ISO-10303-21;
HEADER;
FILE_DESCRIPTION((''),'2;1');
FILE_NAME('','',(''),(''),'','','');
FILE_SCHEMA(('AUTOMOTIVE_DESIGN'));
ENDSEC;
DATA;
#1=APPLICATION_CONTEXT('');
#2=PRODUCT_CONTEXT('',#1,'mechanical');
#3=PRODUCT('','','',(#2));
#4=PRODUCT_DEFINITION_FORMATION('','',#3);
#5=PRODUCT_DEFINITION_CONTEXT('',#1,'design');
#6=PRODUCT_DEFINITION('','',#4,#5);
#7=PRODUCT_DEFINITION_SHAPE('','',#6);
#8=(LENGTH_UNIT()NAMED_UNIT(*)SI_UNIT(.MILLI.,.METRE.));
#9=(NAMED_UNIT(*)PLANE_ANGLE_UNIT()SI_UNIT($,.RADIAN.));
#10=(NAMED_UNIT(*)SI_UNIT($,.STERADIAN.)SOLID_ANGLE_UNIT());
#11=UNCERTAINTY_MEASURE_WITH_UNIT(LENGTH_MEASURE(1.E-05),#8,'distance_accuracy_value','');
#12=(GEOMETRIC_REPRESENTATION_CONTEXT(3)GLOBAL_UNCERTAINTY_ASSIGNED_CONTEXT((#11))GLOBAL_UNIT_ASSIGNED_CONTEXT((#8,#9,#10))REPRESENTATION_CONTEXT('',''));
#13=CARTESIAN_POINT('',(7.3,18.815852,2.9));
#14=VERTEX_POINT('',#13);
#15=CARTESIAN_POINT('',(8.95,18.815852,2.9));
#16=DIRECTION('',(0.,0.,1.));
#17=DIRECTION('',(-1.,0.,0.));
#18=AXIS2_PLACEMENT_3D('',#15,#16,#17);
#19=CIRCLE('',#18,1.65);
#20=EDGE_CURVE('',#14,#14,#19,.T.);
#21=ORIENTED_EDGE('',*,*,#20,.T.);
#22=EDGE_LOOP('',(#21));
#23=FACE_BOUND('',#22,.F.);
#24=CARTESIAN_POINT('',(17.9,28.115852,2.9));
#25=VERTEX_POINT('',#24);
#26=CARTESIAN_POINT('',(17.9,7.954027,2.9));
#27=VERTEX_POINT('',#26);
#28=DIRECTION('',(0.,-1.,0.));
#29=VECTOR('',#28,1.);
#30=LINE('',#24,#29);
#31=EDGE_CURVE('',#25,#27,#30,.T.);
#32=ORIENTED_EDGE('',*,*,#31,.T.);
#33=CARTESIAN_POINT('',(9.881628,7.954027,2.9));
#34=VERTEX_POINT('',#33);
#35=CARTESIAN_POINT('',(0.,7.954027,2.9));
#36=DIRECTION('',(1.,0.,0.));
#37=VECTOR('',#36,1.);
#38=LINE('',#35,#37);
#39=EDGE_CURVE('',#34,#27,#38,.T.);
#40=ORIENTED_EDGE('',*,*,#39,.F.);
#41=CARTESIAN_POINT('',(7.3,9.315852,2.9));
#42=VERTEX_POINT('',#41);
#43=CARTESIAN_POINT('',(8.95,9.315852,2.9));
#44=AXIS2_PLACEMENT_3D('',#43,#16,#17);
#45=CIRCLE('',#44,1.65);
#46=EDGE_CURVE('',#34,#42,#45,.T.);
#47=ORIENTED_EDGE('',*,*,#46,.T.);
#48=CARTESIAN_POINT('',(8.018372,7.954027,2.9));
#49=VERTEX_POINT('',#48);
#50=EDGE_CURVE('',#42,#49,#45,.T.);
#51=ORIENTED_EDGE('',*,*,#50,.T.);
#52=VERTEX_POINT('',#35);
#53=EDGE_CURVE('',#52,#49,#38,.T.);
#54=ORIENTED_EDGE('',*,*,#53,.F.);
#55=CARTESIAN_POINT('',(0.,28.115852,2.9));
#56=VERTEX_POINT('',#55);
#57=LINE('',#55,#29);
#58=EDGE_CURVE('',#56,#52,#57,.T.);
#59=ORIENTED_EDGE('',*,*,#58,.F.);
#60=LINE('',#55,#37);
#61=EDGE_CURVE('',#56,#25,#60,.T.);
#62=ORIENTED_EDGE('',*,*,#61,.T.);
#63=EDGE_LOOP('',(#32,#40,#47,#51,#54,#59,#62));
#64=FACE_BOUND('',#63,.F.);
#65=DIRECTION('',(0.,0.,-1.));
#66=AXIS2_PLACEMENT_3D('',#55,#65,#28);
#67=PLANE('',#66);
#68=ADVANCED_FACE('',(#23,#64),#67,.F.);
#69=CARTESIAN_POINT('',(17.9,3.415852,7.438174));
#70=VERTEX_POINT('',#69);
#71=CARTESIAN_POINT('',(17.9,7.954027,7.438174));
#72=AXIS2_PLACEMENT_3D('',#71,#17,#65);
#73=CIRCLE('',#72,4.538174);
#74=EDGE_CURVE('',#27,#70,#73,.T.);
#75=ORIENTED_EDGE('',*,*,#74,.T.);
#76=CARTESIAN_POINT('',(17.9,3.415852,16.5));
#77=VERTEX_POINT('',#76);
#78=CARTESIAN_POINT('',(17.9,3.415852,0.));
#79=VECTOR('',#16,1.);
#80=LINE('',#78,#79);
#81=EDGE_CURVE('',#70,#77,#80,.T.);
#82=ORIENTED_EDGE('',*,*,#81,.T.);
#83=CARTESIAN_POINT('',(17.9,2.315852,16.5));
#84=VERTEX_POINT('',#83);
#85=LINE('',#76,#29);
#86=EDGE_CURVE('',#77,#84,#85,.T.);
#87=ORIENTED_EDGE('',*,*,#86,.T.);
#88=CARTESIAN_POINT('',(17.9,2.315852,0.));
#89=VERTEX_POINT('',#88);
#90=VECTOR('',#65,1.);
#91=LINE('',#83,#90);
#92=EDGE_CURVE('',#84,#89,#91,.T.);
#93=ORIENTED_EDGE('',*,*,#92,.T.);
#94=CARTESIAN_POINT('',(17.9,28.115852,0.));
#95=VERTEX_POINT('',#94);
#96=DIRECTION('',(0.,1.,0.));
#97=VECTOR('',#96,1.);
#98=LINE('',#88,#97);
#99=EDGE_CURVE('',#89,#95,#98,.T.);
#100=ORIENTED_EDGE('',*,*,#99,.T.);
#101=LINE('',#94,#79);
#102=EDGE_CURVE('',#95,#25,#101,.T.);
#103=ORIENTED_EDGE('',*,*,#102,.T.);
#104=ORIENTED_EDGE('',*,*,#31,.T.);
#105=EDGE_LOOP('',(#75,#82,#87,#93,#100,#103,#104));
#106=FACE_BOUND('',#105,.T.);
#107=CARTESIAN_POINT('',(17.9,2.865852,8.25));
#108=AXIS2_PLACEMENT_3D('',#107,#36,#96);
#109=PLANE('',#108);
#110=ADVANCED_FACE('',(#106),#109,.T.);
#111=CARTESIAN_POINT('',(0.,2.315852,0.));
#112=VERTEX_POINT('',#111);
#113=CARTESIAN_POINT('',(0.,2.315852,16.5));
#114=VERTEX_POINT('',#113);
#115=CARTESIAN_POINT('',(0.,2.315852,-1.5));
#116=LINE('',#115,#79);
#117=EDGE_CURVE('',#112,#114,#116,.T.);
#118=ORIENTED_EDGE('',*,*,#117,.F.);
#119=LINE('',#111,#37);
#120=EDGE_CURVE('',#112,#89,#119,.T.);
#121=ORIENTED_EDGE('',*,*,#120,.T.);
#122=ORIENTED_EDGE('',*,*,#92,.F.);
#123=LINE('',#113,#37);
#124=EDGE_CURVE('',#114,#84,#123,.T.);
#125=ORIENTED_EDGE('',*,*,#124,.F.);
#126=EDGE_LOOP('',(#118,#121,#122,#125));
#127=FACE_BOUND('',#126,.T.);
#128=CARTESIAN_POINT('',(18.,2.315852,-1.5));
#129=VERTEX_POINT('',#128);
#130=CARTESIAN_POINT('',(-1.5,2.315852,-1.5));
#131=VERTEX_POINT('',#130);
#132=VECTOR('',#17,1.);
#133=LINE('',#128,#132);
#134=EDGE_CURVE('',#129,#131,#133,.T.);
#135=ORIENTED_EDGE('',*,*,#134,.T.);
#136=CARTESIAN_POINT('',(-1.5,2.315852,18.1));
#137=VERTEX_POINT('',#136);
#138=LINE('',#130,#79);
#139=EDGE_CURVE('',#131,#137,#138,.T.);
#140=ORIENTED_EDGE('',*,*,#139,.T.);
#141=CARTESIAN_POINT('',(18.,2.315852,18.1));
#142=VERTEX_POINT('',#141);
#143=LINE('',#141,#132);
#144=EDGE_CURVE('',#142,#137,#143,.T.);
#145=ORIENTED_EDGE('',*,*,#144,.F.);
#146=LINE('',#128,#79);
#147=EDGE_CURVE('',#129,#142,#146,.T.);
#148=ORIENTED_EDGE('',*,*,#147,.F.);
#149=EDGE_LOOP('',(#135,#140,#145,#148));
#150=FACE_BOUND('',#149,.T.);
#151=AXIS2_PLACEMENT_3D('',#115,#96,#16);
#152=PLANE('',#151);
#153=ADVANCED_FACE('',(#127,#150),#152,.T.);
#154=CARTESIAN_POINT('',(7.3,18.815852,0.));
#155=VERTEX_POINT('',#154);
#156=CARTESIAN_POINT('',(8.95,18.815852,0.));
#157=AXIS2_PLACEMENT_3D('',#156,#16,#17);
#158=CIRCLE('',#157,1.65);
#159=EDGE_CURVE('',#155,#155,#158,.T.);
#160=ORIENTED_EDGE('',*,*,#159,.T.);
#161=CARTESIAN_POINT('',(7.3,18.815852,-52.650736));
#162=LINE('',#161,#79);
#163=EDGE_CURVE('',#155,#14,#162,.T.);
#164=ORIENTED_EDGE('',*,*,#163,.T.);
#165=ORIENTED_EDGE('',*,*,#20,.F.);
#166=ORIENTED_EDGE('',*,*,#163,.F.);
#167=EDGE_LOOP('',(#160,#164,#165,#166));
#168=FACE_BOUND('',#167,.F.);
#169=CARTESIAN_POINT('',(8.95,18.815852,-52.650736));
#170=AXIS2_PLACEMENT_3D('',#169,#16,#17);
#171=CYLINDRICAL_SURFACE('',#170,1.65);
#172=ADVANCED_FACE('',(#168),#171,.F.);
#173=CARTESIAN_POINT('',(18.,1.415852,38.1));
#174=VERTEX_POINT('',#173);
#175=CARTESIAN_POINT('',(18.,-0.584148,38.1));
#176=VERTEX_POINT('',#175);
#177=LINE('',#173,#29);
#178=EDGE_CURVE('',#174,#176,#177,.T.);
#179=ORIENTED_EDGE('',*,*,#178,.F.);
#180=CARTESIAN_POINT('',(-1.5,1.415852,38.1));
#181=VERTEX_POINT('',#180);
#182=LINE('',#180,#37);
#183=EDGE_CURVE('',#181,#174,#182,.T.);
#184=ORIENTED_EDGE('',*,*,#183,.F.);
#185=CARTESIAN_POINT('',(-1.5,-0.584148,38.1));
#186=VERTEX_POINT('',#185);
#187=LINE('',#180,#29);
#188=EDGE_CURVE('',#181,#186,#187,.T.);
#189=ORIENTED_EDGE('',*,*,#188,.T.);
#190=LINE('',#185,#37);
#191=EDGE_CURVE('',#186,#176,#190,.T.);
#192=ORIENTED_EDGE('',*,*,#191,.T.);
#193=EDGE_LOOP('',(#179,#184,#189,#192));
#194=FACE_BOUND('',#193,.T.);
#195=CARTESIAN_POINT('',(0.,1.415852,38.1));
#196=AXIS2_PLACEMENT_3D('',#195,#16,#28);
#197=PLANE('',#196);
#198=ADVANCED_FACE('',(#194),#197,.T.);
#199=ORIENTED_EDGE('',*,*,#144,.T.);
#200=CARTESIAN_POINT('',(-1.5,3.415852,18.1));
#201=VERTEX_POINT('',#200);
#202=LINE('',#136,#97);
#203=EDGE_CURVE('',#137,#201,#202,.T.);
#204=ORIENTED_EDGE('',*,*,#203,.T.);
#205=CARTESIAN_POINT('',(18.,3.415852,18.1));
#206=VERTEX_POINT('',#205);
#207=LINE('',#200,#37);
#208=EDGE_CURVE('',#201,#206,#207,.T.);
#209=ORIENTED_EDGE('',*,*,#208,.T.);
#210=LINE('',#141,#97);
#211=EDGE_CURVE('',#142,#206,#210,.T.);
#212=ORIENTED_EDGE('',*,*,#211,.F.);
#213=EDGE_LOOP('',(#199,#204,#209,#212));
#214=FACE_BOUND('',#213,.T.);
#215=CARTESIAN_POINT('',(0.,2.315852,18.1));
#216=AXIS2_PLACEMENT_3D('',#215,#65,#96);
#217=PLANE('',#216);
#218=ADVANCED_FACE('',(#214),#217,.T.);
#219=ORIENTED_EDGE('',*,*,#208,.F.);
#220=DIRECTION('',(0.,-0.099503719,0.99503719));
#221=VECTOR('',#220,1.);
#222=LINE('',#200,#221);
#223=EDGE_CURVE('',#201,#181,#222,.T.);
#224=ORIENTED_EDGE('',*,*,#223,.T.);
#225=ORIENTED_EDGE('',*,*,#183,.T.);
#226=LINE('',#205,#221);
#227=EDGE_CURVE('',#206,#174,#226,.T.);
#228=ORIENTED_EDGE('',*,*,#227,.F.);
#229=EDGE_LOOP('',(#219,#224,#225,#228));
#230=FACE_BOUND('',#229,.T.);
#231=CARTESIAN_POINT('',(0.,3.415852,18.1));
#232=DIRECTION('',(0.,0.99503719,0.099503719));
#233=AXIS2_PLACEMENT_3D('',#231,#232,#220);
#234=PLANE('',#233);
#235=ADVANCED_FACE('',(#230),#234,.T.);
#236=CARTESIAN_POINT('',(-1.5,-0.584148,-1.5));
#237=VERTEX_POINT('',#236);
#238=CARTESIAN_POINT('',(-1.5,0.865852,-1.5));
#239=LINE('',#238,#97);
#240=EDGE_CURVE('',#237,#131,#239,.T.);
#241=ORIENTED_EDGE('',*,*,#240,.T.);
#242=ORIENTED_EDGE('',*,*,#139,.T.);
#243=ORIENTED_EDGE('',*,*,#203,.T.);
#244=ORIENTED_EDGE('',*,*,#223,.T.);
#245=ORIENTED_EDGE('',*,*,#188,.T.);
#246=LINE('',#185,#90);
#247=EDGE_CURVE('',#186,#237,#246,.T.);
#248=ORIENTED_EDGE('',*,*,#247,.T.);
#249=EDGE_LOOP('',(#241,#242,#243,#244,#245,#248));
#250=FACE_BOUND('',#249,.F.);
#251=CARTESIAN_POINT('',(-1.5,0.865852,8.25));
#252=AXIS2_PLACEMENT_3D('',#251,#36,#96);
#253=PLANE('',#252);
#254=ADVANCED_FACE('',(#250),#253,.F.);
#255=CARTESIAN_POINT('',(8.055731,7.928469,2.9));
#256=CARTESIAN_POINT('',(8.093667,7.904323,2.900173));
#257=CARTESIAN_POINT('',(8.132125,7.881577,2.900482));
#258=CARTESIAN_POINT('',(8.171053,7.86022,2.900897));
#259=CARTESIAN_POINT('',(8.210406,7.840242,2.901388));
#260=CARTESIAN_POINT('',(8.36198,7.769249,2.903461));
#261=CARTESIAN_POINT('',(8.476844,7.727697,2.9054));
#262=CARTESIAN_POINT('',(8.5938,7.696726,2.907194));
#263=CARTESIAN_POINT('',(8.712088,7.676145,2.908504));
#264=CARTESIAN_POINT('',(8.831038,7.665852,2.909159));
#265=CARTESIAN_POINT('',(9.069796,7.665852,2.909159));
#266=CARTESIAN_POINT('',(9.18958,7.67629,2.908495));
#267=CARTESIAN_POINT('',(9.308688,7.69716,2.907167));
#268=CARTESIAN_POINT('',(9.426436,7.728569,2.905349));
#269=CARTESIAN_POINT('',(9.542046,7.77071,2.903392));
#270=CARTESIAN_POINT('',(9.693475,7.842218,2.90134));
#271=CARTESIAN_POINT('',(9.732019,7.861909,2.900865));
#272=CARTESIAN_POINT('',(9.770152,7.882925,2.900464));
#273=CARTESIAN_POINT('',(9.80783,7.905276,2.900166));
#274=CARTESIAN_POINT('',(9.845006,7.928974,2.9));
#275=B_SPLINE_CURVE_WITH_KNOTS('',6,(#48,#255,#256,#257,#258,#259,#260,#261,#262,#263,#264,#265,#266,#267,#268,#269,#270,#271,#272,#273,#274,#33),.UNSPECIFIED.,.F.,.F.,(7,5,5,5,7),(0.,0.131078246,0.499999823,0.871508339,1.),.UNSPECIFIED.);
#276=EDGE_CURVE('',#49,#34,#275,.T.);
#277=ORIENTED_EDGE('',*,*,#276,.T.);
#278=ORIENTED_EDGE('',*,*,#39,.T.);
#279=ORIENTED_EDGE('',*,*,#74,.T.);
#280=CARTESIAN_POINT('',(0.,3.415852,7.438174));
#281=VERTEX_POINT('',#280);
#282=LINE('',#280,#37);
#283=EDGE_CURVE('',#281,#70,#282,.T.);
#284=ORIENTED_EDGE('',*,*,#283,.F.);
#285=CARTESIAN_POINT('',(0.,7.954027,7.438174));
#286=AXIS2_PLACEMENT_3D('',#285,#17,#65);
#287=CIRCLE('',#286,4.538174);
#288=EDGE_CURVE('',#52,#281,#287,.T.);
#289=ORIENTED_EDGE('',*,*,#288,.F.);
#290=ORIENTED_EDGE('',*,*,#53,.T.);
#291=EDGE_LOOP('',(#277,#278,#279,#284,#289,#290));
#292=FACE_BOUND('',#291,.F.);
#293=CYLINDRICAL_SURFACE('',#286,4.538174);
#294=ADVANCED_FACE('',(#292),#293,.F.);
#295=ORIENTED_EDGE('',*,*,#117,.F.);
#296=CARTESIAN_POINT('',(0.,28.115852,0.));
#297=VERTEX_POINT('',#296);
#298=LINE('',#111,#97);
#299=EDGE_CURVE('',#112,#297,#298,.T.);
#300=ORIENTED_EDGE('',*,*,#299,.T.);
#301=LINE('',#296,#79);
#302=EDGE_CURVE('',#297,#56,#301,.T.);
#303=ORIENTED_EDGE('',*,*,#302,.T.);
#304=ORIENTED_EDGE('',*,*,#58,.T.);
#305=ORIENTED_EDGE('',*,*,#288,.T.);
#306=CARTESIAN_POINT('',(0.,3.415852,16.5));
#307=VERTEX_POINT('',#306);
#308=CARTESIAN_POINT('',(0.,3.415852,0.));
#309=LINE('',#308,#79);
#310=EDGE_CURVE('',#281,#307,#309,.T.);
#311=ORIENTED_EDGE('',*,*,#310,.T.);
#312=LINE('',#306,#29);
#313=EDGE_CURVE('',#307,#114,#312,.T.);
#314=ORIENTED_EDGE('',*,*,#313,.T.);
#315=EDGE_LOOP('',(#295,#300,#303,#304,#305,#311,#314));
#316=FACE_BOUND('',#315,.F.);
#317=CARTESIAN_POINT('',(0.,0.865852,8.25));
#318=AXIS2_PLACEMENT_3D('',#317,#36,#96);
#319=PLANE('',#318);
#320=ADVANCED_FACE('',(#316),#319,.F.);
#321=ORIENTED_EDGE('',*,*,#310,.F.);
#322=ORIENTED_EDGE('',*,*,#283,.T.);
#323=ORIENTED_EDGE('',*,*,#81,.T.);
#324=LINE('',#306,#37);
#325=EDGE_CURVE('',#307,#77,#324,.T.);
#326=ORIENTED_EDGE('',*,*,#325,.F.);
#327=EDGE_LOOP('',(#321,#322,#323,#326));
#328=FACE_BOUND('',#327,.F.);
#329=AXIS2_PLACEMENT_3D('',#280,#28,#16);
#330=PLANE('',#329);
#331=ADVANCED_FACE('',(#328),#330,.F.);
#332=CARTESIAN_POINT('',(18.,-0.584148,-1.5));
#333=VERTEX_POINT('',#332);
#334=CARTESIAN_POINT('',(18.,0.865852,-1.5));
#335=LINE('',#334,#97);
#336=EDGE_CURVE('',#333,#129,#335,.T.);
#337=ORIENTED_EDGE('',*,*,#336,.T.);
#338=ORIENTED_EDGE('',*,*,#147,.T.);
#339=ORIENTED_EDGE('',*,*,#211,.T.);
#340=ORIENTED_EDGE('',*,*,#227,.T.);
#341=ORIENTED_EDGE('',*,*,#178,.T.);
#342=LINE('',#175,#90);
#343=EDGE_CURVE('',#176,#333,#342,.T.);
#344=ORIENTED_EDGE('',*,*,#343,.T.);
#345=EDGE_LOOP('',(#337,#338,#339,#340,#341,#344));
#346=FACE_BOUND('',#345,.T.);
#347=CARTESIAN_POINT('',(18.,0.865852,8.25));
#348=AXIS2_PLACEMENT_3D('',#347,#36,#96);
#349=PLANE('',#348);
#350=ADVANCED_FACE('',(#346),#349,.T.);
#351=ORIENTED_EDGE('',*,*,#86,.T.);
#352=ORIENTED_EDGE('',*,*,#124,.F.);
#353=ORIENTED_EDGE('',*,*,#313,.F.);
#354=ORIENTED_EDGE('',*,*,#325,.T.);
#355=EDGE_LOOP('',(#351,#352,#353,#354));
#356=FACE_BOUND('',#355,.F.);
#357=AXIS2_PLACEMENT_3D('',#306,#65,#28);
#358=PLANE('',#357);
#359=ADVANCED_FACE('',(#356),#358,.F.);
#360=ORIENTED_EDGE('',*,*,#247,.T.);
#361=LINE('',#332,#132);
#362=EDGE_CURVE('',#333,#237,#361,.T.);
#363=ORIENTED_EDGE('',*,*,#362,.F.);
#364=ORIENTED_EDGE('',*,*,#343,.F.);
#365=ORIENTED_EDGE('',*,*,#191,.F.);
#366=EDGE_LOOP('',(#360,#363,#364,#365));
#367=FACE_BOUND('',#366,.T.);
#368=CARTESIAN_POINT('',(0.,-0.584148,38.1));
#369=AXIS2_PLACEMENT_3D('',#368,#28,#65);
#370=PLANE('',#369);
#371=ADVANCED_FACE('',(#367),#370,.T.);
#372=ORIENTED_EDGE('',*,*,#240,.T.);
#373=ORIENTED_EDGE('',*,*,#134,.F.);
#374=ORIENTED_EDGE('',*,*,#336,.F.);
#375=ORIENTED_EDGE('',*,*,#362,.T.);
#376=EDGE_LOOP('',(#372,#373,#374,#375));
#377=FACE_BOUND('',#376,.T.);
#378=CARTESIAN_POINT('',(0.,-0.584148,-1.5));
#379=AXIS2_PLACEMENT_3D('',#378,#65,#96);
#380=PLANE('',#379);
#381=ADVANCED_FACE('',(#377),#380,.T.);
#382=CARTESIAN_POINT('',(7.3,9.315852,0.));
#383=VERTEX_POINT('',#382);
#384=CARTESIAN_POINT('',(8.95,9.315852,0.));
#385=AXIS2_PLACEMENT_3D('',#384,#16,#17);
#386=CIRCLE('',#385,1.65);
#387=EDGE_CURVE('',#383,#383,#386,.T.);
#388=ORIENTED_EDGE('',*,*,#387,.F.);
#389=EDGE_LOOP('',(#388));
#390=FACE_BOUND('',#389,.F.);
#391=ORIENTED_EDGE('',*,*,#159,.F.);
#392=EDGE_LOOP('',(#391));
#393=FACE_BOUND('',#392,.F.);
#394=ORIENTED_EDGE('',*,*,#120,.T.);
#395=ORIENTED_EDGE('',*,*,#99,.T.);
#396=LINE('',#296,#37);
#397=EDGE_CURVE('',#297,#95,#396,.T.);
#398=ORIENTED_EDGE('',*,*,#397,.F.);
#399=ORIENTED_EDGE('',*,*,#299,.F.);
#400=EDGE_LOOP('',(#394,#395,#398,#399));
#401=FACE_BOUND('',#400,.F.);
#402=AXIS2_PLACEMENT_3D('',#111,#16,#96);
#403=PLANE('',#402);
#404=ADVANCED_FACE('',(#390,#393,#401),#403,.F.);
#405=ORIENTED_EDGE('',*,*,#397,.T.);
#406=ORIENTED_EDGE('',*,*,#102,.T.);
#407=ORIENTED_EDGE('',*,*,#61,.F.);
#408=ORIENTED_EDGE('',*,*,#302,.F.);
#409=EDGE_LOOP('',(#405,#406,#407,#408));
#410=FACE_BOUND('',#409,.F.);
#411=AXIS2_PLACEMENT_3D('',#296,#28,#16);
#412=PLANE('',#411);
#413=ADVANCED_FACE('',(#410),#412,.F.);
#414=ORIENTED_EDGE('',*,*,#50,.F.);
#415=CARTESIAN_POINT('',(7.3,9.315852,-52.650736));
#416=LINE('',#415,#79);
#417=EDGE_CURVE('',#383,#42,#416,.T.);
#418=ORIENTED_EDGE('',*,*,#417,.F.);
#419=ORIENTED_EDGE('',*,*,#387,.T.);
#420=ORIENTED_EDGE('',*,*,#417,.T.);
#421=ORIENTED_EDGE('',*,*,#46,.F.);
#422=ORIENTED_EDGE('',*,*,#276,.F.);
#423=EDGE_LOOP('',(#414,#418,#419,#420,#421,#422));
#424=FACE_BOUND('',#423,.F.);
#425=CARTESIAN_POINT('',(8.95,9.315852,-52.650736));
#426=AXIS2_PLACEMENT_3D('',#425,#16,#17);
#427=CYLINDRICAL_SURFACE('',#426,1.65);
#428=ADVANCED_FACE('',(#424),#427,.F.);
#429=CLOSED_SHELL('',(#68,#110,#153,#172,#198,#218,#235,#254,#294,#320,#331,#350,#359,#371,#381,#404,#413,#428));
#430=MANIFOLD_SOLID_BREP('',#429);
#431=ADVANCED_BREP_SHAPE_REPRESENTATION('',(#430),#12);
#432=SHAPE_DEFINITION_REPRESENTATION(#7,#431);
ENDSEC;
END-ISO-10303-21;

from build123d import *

# Parameters (mm, degrees)
F1_DEPTH      = 17.9
F0_W          = 2.9
F0_H          = 16.5
F0_H_2        = 1.5
F2_DEPTH      = 18
F2_DEPTH_BACK = 1.5
F4_D          = 3.3


# Not quite as in the source:
# - a feature names something its author has since deleted; it is built from what else it names


with BuildPart() as f1:
    # F0 (on Right) → F1 (new body)
    with BuildSketch(Plane.YZ):
        Polygon((3.4158524887, 16.5), (2.3158524887, 16.5), (2.3158524887, 0), (3.4158524887, 0), (3.4158524887, 7.4381744285), align=None)
        with BuildLine():
            ThreePointArc((7.9540269172, 2.9), (4.7450530046, 4.2292005159), (3.4158524887, 7.4381744285))
            Line((3.4158524887, 7.4381744285), (3.4158524887, 0))
            Line((3.4158524887, 0), (9.4158524887, 0))
            Line((9.4158524887, 0), (12.5158524887, 0))
            Line((12.5158524887, 0), (22.0158524887, 0))
            Line((22.0158524887, 0), (25.1158524887, 0))
            Line((25.1158524887, 0), (28.1158524887, 0))
            Line((28.1158524887, 0), (28.1158524887, 2.9))
            Line((28.1158524887, 2.9), (25.1158524887, 2.9))
            Line((25.1158524887, 2.9), (22.0158524887, 2.9))
            Line((22.0158524887, 2.9), (12.5158524887, 2.9))
            Line((12.5158524887, 2.9), (9.4158524887, 2.9))
            Line((9.4158524887, 2.9), (7.9540269172, 2.9))
        make_face()
    extrude(amount=F1_DEPTH)

    # F0 (on Right) → F2 (join, two sides)
    with BuildSketch(Plane.YZ) as f2_sk:
        with Locations((0.8658524887, 8.25)):
            Rectangle(F0_W, F0_H)
        Polygon((-0.5841475113, 18.1), (-0.5841475113, 16.5), (2.3158524887, 16.5), (2.3158524887, 18.1), (3.4158524887, 18.1), (1.4158524887, 38.1), (-0.5841475113, 38.1), align=None)
        with Locations((0.8658524887, -0.75)):
            Rectangle(F0_W, F0_H_2)
    extrude(amount=F2_DEPTH)
    extrude(f2_sk.sketch, amount=-F2_DEPTH_BACK)

    # F4 (through all)
    with Locations(Plane(origin=(0, 0, 0), x_dir=(1, 0, 0), z_dir=(0, 0, -1))):
        with Locations((8.95, -9.3158524887), (8.95, -18.8158524887)):
            Hole(F4_D / 2)


solid = f1.part
